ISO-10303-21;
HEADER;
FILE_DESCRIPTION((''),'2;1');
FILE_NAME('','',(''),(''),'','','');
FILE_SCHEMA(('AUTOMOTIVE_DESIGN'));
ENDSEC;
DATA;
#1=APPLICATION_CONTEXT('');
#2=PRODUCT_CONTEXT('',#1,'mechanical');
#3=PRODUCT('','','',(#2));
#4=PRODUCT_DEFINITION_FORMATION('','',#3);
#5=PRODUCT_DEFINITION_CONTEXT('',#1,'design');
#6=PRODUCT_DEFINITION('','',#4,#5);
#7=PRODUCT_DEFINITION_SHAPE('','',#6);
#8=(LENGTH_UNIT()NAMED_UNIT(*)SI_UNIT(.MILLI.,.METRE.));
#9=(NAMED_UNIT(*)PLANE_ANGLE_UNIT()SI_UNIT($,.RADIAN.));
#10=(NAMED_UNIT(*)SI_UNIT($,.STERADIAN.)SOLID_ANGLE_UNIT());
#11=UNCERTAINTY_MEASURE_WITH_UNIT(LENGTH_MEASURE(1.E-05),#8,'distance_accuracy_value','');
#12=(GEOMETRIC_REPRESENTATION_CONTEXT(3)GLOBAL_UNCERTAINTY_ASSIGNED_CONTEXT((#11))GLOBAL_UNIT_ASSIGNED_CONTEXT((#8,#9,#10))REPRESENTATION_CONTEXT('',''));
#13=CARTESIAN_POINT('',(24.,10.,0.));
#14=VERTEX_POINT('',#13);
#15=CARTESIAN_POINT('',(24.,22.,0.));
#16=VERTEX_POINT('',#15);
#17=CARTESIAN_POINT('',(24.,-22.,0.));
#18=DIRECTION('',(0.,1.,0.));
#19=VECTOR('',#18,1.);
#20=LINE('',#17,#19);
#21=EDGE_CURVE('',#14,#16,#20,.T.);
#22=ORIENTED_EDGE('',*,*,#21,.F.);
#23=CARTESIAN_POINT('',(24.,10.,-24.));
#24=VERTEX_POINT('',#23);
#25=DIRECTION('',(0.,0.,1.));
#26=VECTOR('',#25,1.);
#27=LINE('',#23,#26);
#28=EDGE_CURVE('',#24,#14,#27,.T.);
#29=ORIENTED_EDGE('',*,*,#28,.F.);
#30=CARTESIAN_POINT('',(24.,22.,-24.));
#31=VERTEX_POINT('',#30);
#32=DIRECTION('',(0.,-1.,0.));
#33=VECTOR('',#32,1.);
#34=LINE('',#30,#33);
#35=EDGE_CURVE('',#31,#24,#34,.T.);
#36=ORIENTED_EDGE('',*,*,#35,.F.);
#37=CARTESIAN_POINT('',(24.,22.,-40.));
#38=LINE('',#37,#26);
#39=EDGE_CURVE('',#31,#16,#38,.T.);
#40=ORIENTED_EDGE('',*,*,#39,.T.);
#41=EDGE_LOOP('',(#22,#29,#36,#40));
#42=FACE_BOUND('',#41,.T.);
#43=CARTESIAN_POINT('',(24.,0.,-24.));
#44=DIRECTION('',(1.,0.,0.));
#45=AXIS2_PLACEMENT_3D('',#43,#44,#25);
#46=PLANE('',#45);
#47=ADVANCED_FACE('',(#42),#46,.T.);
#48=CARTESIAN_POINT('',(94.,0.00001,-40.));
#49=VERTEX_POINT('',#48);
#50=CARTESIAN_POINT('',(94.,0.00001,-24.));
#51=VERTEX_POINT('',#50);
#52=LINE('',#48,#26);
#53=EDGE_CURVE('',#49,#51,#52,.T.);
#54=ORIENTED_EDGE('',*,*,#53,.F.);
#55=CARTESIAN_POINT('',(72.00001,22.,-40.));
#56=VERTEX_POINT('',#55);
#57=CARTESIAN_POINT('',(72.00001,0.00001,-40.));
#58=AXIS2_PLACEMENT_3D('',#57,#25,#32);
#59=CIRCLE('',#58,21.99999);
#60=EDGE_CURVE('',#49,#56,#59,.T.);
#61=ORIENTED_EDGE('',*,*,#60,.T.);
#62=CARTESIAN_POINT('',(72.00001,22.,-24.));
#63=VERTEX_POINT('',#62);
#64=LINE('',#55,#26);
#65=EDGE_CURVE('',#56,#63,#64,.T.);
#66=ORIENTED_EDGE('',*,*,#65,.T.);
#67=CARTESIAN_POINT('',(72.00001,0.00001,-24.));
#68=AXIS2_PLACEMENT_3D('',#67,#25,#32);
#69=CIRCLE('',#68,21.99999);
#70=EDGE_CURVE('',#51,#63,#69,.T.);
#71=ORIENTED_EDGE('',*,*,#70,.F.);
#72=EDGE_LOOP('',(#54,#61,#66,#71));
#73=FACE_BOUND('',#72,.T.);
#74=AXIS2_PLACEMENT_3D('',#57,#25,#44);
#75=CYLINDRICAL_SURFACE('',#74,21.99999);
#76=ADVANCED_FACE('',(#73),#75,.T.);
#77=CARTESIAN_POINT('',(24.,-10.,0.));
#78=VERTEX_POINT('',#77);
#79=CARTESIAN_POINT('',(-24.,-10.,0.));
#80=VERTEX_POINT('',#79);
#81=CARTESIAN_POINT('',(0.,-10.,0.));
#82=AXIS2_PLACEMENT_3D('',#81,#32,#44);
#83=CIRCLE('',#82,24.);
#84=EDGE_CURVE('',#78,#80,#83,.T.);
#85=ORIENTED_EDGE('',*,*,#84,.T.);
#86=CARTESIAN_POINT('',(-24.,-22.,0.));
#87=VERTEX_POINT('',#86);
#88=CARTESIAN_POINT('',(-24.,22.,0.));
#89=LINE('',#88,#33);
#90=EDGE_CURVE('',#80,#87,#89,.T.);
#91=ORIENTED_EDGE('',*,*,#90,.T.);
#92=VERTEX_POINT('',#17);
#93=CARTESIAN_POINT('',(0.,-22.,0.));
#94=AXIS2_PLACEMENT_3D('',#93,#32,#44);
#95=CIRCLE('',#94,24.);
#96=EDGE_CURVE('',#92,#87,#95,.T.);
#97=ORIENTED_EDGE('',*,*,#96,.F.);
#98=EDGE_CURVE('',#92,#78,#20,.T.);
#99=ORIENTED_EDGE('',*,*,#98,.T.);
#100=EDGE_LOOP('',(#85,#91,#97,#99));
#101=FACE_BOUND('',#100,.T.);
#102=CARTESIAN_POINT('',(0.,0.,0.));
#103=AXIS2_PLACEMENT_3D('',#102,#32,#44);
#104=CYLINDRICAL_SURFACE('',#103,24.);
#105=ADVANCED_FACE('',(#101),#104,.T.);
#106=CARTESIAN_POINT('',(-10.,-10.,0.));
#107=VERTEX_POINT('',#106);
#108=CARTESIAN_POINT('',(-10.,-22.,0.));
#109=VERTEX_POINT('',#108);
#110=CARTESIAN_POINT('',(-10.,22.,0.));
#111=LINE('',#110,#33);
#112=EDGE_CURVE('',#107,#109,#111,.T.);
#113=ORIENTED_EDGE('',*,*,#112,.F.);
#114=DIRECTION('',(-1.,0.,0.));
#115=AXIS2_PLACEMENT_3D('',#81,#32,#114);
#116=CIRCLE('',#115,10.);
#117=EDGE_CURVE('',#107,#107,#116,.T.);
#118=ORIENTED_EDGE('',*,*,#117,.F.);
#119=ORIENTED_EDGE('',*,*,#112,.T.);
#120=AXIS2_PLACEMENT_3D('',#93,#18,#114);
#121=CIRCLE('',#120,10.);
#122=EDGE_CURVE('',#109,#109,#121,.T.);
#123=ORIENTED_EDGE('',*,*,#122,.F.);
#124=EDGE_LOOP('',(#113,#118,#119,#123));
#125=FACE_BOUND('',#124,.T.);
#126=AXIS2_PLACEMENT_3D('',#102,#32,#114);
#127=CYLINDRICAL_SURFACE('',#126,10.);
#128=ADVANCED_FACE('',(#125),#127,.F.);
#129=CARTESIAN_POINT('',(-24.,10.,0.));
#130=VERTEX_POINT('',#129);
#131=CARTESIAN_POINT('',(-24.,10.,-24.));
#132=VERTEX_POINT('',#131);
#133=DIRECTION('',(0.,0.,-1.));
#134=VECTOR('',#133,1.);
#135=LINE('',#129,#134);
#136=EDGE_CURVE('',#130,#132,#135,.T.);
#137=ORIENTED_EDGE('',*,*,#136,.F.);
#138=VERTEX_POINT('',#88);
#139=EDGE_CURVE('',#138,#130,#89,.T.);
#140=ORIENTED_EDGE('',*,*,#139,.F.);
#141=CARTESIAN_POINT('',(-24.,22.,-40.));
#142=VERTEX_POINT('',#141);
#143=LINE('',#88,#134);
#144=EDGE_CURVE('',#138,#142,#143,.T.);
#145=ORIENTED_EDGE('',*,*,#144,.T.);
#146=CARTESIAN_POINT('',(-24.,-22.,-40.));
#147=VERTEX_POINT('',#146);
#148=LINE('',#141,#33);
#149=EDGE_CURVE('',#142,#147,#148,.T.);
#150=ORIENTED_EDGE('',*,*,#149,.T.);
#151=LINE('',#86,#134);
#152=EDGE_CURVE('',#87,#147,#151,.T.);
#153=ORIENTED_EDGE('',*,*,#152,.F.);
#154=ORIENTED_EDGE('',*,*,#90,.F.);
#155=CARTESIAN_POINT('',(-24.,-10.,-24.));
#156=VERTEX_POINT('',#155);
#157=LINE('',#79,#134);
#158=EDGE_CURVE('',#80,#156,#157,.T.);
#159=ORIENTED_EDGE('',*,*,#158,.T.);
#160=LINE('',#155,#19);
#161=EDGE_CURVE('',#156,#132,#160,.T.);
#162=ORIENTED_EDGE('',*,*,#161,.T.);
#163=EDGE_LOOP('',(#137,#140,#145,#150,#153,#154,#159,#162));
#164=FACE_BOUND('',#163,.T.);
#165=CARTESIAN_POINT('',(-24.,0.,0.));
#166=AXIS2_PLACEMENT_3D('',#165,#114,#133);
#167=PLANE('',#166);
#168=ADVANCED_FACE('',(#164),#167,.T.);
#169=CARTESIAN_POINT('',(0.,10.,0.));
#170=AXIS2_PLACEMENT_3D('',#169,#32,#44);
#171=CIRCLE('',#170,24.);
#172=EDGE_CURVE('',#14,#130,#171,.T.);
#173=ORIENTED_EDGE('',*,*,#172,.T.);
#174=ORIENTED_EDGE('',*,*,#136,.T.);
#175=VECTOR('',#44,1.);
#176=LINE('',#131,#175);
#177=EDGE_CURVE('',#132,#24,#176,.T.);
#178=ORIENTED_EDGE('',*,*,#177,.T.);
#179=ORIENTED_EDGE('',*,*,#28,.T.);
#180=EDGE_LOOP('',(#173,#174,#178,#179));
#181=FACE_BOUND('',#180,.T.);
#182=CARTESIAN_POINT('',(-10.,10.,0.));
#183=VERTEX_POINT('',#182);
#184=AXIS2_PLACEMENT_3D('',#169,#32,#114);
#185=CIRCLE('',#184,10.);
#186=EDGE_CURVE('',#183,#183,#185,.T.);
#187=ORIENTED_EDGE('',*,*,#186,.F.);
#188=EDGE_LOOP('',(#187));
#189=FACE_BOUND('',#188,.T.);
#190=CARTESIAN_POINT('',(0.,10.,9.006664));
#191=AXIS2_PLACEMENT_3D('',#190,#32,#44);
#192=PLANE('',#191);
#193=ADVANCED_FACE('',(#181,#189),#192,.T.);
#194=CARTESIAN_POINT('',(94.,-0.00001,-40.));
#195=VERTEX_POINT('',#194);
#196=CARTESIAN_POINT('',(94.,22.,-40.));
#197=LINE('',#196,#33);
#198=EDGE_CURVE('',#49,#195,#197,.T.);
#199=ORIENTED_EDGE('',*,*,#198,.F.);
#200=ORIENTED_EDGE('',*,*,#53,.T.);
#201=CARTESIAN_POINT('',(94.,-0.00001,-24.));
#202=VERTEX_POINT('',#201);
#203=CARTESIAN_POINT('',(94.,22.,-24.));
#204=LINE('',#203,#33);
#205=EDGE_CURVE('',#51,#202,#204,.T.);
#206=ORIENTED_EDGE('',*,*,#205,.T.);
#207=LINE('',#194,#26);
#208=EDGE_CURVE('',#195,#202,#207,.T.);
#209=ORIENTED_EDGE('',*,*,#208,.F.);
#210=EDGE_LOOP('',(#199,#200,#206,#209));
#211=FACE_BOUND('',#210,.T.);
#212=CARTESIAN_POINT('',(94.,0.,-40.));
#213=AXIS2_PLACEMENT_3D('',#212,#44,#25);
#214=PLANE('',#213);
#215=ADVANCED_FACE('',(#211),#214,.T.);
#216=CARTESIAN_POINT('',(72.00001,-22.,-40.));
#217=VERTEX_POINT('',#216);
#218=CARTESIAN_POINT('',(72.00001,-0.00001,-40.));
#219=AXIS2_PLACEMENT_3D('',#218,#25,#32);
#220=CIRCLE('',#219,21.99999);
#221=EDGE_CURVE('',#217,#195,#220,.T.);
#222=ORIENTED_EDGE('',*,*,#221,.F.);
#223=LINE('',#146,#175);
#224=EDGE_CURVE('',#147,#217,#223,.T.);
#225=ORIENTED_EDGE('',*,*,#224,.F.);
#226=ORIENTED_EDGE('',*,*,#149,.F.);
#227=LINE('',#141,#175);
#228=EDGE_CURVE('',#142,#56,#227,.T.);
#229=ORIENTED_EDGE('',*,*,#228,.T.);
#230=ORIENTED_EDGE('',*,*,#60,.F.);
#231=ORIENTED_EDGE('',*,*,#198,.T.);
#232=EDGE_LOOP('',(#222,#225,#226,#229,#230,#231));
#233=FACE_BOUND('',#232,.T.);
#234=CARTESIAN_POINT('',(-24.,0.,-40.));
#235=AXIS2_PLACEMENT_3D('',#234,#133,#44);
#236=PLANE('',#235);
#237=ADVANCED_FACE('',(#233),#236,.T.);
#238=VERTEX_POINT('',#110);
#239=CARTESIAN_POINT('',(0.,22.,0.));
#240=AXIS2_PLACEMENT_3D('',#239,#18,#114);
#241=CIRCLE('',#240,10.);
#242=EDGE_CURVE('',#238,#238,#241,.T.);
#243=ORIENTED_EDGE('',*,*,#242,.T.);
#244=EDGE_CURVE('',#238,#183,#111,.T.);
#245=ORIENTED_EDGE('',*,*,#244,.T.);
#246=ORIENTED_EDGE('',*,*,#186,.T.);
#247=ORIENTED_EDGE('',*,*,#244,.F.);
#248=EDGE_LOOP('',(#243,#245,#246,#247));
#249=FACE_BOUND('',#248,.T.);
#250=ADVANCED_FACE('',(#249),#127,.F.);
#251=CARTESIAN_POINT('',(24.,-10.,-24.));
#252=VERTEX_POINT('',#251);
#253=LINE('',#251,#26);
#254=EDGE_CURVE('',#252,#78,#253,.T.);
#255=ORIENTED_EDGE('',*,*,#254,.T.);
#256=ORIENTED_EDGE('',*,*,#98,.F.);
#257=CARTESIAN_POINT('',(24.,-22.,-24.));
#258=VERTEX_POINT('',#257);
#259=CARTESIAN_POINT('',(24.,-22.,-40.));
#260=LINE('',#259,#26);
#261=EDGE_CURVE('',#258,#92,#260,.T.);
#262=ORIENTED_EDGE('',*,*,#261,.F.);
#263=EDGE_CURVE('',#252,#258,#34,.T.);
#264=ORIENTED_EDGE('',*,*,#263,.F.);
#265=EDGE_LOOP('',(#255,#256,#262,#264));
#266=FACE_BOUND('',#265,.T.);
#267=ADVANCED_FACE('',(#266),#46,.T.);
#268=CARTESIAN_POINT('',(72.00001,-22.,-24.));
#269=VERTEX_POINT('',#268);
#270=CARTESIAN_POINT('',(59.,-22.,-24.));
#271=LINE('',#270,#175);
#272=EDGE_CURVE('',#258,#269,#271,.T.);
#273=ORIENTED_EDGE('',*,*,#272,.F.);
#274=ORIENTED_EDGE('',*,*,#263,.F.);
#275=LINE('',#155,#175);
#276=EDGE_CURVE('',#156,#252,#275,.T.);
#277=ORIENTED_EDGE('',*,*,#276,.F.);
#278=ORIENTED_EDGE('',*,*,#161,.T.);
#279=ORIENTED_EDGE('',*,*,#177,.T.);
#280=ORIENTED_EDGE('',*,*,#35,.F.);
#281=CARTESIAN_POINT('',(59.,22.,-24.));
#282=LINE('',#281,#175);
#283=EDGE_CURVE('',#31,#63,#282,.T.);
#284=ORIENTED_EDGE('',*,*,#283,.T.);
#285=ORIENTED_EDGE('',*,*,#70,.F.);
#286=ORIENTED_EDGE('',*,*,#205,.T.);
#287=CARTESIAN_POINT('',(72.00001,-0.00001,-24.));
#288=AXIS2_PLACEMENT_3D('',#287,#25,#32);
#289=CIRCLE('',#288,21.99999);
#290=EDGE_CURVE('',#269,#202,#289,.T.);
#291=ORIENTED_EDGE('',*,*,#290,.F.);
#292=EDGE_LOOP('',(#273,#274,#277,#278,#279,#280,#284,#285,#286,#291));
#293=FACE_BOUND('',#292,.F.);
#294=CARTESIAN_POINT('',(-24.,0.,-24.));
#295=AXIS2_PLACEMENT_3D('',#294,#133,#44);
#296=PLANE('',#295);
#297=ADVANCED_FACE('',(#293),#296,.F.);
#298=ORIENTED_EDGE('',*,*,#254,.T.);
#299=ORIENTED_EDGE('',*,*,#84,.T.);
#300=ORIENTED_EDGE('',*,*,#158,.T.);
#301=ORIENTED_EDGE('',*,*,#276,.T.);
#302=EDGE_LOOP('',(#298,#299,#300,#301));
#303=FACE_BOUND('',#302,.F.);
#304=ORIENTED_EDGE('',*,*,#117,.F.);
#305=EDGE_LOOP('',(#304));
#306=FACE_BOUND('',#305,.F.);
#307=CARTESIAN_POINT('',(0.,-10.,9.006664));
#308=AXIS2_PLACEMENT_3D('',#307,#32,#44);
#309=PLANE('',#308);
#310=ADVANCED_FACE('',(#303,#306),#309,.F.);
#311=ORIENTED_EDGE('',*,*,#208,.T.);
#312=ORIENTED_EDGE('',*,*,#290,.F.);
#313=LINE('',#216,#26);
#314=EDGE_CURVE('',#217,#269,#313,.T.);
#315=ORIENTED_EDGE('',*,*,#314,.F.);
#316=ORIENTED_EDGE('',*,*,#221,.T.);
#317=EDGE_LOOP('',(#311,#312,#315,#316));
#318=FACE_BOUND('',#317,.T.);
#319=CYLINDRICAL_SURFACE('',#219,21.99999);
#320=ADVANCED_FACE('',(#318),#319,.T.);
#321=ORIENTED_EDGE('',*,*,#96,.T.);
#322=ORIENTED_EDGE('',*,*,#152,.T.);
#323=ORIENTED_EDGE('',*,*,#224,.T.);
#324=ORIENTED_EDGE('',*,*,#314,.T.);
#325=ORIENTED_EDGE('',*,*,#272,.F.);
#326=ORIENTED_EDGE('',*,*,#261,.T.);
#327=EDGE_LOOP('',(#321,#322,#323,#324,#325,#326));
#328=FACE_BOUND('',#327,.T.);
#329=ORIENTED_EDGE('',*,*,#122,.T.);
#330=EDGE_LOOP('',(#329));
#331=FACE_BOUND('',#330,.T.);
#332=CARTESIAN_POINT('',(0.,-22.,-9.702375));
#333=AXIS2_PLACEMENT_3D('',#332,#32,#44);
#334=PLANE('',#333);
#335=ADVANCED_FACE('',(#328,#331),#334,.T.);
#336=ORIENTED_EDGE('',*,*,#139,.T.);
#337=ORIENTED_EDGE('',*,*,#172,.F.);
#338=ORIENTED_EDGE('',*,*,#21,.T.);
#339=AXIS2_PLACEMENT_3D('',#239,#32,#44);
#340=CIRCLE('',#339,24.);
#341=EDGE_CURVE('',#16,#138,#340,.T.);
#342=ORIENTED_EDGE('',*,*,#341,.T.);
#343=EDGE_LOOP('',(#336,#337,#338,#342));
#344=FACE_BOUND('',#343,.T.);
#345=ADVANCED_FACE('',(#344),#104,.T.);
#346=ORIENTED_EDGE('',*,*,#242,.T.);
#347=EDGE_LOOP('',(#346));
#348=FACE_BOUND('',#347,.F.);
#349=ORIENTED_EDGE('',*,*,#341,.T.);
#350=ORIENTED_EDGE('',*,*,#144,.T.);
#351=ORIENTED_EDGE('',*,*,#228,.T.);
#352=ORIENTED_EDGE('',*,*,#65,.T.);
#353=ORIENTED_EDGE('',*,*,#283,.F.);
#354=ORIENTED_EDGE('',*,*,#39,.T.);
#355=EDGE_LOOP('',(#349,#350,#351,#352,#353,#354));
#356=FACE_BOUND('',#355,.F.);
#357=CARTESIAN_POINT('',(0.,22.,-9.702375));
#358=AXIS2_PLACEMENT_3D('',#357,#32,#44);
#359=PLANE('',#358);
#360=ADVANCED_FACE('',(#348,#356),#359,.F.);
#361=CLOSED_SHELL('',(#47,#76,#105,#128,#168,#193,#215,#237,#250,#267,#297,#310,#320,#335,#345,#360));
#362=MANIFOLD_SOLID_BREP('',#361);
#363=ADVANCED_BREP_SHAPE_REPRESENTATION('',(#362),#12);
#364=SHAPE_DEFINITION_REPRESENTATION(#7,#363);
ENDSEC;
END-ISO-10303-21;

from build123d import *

# Parameters (mm, degrees)
F0_W          = 70
F0_H          = 16
F1_DEPTH      = 22
F1_DEPTH_BACK = 22
F2_DEPTH      = 10
F2_DEPTH_BACK = 10
F3_R          = 21.99999


# Not quite as in the source:
# - a fillet or chamfer is up to 0.001 mm smaller than in the source, because OpenCascade refuses the exact size


with BuildPart() as f1:
    # F0 (on Front) → F1 (new body, two sides)
    with BuildSketch(Plane.XZ) as f1_sk:
        with BuildLine():
            Line((24, 0), (10, 0))
            ThreePointArc((10, 0), (0, -10), (-10, 0))
            Line((-10, 0), (-24, 0))
            ThreePointArc((-24, 0), (-16.9705627485, -16.9705627485), (0, -24))
            ThreePointArc((0, -24), (16.9705627485, -16.9705627485), (24, 0))
        make_face()
        with BuildLine():
            ThreePointArc((-10, 0), (0, 10), (10, 0))
            Line((10, 0), (24, 0))
            ThreePointArc((24, 0), (0, 24), (-24, 0))
            Line((-24, 0), (-10, 0))
        make_face()
        with BuildLine():
            Line((24, -24), (24, 0))
            ThreePointArc((24, 0), (16.9705627485, -16.9705627485), (0, -24))
            Line((0, -24), (24, -24))
        make_face()
        with BuildLine():
            ThreePointArc((0, -24), (-16.9705627485, -16.9705627485), (-24, 0))
            Line((-24, 0), (-24, -24))
            Line((-24, -24), (0, -24))
        make_face()
        Polygon((24, -24), (0, -24), (-24, -24), (-24, -40), (24, -40), align=None)
        with Locations((59, -32)):
            Rectangle(F0_W, F0_H)
    extrude(amount=F1_DEPTH)
    extrude(f1_sk.sketch, amount=-F1_DEPTH_BACK)

    # F0 (on Front) → F2 (cut, two sides)
    with BuildSketch(Plane.XZ) as f2_sk:
        with BuildLine():
            ThreePointArc((-10, 0), (0, 10), (10, 0))
            Line((10, 0), (24, 0))
            ThreePointArc((24, 0), (0, 24), (-24, 0))
            Line((-24, 0), (-10, 0))
        make_face()
        with BuildLine():
            Line((24, -24), (24, 0))
            ThreePointArc((24, 0), (16.9705627485, -16.9705627485), (0, -24))
            Line((0, -24), (24, -24))
        make_face()
        with BuildLine():
            ThreePointArc((0, -24), (-16.9705627485, -16.9705627485), (-24, 0))
            Line((-24, 0), (-24, -24))
            Line((-24, -24), (0, -24))
        make_face()
        with BuildLine():
            Line((24, 0), (10, 0))
            ThreePointArc((10, 0), (0, -10), (-10, 0))
            Line((-10, 0), (-24, 0))
            ThreePointArc((-24, 0), (-16.9705627485, -16.9705627485), (0, -24))
            ThreePointArc((0, -24), (16.9705627485, -16.9705627485), (24, 0))
        make_face()
    extrude(amount=-F2_DEPTH, mode=Mode.SUBTRACT)
    extrude(f2_sk.sketch, amount=F2_DEPTH_BACK, mode=Mode.SUBTRACT)

    # F3 (radius 22 in the source; OpenCascade refuses exactly that, so slightly less here)
    f3_edges = [f1.edges().sort_by_distance(p)[0] for p in [
        (94, -22, -32),
        (94, 22, -32),
    ]]
    fillet(f3_edges, radius=F3_R)


solid = f1.part
